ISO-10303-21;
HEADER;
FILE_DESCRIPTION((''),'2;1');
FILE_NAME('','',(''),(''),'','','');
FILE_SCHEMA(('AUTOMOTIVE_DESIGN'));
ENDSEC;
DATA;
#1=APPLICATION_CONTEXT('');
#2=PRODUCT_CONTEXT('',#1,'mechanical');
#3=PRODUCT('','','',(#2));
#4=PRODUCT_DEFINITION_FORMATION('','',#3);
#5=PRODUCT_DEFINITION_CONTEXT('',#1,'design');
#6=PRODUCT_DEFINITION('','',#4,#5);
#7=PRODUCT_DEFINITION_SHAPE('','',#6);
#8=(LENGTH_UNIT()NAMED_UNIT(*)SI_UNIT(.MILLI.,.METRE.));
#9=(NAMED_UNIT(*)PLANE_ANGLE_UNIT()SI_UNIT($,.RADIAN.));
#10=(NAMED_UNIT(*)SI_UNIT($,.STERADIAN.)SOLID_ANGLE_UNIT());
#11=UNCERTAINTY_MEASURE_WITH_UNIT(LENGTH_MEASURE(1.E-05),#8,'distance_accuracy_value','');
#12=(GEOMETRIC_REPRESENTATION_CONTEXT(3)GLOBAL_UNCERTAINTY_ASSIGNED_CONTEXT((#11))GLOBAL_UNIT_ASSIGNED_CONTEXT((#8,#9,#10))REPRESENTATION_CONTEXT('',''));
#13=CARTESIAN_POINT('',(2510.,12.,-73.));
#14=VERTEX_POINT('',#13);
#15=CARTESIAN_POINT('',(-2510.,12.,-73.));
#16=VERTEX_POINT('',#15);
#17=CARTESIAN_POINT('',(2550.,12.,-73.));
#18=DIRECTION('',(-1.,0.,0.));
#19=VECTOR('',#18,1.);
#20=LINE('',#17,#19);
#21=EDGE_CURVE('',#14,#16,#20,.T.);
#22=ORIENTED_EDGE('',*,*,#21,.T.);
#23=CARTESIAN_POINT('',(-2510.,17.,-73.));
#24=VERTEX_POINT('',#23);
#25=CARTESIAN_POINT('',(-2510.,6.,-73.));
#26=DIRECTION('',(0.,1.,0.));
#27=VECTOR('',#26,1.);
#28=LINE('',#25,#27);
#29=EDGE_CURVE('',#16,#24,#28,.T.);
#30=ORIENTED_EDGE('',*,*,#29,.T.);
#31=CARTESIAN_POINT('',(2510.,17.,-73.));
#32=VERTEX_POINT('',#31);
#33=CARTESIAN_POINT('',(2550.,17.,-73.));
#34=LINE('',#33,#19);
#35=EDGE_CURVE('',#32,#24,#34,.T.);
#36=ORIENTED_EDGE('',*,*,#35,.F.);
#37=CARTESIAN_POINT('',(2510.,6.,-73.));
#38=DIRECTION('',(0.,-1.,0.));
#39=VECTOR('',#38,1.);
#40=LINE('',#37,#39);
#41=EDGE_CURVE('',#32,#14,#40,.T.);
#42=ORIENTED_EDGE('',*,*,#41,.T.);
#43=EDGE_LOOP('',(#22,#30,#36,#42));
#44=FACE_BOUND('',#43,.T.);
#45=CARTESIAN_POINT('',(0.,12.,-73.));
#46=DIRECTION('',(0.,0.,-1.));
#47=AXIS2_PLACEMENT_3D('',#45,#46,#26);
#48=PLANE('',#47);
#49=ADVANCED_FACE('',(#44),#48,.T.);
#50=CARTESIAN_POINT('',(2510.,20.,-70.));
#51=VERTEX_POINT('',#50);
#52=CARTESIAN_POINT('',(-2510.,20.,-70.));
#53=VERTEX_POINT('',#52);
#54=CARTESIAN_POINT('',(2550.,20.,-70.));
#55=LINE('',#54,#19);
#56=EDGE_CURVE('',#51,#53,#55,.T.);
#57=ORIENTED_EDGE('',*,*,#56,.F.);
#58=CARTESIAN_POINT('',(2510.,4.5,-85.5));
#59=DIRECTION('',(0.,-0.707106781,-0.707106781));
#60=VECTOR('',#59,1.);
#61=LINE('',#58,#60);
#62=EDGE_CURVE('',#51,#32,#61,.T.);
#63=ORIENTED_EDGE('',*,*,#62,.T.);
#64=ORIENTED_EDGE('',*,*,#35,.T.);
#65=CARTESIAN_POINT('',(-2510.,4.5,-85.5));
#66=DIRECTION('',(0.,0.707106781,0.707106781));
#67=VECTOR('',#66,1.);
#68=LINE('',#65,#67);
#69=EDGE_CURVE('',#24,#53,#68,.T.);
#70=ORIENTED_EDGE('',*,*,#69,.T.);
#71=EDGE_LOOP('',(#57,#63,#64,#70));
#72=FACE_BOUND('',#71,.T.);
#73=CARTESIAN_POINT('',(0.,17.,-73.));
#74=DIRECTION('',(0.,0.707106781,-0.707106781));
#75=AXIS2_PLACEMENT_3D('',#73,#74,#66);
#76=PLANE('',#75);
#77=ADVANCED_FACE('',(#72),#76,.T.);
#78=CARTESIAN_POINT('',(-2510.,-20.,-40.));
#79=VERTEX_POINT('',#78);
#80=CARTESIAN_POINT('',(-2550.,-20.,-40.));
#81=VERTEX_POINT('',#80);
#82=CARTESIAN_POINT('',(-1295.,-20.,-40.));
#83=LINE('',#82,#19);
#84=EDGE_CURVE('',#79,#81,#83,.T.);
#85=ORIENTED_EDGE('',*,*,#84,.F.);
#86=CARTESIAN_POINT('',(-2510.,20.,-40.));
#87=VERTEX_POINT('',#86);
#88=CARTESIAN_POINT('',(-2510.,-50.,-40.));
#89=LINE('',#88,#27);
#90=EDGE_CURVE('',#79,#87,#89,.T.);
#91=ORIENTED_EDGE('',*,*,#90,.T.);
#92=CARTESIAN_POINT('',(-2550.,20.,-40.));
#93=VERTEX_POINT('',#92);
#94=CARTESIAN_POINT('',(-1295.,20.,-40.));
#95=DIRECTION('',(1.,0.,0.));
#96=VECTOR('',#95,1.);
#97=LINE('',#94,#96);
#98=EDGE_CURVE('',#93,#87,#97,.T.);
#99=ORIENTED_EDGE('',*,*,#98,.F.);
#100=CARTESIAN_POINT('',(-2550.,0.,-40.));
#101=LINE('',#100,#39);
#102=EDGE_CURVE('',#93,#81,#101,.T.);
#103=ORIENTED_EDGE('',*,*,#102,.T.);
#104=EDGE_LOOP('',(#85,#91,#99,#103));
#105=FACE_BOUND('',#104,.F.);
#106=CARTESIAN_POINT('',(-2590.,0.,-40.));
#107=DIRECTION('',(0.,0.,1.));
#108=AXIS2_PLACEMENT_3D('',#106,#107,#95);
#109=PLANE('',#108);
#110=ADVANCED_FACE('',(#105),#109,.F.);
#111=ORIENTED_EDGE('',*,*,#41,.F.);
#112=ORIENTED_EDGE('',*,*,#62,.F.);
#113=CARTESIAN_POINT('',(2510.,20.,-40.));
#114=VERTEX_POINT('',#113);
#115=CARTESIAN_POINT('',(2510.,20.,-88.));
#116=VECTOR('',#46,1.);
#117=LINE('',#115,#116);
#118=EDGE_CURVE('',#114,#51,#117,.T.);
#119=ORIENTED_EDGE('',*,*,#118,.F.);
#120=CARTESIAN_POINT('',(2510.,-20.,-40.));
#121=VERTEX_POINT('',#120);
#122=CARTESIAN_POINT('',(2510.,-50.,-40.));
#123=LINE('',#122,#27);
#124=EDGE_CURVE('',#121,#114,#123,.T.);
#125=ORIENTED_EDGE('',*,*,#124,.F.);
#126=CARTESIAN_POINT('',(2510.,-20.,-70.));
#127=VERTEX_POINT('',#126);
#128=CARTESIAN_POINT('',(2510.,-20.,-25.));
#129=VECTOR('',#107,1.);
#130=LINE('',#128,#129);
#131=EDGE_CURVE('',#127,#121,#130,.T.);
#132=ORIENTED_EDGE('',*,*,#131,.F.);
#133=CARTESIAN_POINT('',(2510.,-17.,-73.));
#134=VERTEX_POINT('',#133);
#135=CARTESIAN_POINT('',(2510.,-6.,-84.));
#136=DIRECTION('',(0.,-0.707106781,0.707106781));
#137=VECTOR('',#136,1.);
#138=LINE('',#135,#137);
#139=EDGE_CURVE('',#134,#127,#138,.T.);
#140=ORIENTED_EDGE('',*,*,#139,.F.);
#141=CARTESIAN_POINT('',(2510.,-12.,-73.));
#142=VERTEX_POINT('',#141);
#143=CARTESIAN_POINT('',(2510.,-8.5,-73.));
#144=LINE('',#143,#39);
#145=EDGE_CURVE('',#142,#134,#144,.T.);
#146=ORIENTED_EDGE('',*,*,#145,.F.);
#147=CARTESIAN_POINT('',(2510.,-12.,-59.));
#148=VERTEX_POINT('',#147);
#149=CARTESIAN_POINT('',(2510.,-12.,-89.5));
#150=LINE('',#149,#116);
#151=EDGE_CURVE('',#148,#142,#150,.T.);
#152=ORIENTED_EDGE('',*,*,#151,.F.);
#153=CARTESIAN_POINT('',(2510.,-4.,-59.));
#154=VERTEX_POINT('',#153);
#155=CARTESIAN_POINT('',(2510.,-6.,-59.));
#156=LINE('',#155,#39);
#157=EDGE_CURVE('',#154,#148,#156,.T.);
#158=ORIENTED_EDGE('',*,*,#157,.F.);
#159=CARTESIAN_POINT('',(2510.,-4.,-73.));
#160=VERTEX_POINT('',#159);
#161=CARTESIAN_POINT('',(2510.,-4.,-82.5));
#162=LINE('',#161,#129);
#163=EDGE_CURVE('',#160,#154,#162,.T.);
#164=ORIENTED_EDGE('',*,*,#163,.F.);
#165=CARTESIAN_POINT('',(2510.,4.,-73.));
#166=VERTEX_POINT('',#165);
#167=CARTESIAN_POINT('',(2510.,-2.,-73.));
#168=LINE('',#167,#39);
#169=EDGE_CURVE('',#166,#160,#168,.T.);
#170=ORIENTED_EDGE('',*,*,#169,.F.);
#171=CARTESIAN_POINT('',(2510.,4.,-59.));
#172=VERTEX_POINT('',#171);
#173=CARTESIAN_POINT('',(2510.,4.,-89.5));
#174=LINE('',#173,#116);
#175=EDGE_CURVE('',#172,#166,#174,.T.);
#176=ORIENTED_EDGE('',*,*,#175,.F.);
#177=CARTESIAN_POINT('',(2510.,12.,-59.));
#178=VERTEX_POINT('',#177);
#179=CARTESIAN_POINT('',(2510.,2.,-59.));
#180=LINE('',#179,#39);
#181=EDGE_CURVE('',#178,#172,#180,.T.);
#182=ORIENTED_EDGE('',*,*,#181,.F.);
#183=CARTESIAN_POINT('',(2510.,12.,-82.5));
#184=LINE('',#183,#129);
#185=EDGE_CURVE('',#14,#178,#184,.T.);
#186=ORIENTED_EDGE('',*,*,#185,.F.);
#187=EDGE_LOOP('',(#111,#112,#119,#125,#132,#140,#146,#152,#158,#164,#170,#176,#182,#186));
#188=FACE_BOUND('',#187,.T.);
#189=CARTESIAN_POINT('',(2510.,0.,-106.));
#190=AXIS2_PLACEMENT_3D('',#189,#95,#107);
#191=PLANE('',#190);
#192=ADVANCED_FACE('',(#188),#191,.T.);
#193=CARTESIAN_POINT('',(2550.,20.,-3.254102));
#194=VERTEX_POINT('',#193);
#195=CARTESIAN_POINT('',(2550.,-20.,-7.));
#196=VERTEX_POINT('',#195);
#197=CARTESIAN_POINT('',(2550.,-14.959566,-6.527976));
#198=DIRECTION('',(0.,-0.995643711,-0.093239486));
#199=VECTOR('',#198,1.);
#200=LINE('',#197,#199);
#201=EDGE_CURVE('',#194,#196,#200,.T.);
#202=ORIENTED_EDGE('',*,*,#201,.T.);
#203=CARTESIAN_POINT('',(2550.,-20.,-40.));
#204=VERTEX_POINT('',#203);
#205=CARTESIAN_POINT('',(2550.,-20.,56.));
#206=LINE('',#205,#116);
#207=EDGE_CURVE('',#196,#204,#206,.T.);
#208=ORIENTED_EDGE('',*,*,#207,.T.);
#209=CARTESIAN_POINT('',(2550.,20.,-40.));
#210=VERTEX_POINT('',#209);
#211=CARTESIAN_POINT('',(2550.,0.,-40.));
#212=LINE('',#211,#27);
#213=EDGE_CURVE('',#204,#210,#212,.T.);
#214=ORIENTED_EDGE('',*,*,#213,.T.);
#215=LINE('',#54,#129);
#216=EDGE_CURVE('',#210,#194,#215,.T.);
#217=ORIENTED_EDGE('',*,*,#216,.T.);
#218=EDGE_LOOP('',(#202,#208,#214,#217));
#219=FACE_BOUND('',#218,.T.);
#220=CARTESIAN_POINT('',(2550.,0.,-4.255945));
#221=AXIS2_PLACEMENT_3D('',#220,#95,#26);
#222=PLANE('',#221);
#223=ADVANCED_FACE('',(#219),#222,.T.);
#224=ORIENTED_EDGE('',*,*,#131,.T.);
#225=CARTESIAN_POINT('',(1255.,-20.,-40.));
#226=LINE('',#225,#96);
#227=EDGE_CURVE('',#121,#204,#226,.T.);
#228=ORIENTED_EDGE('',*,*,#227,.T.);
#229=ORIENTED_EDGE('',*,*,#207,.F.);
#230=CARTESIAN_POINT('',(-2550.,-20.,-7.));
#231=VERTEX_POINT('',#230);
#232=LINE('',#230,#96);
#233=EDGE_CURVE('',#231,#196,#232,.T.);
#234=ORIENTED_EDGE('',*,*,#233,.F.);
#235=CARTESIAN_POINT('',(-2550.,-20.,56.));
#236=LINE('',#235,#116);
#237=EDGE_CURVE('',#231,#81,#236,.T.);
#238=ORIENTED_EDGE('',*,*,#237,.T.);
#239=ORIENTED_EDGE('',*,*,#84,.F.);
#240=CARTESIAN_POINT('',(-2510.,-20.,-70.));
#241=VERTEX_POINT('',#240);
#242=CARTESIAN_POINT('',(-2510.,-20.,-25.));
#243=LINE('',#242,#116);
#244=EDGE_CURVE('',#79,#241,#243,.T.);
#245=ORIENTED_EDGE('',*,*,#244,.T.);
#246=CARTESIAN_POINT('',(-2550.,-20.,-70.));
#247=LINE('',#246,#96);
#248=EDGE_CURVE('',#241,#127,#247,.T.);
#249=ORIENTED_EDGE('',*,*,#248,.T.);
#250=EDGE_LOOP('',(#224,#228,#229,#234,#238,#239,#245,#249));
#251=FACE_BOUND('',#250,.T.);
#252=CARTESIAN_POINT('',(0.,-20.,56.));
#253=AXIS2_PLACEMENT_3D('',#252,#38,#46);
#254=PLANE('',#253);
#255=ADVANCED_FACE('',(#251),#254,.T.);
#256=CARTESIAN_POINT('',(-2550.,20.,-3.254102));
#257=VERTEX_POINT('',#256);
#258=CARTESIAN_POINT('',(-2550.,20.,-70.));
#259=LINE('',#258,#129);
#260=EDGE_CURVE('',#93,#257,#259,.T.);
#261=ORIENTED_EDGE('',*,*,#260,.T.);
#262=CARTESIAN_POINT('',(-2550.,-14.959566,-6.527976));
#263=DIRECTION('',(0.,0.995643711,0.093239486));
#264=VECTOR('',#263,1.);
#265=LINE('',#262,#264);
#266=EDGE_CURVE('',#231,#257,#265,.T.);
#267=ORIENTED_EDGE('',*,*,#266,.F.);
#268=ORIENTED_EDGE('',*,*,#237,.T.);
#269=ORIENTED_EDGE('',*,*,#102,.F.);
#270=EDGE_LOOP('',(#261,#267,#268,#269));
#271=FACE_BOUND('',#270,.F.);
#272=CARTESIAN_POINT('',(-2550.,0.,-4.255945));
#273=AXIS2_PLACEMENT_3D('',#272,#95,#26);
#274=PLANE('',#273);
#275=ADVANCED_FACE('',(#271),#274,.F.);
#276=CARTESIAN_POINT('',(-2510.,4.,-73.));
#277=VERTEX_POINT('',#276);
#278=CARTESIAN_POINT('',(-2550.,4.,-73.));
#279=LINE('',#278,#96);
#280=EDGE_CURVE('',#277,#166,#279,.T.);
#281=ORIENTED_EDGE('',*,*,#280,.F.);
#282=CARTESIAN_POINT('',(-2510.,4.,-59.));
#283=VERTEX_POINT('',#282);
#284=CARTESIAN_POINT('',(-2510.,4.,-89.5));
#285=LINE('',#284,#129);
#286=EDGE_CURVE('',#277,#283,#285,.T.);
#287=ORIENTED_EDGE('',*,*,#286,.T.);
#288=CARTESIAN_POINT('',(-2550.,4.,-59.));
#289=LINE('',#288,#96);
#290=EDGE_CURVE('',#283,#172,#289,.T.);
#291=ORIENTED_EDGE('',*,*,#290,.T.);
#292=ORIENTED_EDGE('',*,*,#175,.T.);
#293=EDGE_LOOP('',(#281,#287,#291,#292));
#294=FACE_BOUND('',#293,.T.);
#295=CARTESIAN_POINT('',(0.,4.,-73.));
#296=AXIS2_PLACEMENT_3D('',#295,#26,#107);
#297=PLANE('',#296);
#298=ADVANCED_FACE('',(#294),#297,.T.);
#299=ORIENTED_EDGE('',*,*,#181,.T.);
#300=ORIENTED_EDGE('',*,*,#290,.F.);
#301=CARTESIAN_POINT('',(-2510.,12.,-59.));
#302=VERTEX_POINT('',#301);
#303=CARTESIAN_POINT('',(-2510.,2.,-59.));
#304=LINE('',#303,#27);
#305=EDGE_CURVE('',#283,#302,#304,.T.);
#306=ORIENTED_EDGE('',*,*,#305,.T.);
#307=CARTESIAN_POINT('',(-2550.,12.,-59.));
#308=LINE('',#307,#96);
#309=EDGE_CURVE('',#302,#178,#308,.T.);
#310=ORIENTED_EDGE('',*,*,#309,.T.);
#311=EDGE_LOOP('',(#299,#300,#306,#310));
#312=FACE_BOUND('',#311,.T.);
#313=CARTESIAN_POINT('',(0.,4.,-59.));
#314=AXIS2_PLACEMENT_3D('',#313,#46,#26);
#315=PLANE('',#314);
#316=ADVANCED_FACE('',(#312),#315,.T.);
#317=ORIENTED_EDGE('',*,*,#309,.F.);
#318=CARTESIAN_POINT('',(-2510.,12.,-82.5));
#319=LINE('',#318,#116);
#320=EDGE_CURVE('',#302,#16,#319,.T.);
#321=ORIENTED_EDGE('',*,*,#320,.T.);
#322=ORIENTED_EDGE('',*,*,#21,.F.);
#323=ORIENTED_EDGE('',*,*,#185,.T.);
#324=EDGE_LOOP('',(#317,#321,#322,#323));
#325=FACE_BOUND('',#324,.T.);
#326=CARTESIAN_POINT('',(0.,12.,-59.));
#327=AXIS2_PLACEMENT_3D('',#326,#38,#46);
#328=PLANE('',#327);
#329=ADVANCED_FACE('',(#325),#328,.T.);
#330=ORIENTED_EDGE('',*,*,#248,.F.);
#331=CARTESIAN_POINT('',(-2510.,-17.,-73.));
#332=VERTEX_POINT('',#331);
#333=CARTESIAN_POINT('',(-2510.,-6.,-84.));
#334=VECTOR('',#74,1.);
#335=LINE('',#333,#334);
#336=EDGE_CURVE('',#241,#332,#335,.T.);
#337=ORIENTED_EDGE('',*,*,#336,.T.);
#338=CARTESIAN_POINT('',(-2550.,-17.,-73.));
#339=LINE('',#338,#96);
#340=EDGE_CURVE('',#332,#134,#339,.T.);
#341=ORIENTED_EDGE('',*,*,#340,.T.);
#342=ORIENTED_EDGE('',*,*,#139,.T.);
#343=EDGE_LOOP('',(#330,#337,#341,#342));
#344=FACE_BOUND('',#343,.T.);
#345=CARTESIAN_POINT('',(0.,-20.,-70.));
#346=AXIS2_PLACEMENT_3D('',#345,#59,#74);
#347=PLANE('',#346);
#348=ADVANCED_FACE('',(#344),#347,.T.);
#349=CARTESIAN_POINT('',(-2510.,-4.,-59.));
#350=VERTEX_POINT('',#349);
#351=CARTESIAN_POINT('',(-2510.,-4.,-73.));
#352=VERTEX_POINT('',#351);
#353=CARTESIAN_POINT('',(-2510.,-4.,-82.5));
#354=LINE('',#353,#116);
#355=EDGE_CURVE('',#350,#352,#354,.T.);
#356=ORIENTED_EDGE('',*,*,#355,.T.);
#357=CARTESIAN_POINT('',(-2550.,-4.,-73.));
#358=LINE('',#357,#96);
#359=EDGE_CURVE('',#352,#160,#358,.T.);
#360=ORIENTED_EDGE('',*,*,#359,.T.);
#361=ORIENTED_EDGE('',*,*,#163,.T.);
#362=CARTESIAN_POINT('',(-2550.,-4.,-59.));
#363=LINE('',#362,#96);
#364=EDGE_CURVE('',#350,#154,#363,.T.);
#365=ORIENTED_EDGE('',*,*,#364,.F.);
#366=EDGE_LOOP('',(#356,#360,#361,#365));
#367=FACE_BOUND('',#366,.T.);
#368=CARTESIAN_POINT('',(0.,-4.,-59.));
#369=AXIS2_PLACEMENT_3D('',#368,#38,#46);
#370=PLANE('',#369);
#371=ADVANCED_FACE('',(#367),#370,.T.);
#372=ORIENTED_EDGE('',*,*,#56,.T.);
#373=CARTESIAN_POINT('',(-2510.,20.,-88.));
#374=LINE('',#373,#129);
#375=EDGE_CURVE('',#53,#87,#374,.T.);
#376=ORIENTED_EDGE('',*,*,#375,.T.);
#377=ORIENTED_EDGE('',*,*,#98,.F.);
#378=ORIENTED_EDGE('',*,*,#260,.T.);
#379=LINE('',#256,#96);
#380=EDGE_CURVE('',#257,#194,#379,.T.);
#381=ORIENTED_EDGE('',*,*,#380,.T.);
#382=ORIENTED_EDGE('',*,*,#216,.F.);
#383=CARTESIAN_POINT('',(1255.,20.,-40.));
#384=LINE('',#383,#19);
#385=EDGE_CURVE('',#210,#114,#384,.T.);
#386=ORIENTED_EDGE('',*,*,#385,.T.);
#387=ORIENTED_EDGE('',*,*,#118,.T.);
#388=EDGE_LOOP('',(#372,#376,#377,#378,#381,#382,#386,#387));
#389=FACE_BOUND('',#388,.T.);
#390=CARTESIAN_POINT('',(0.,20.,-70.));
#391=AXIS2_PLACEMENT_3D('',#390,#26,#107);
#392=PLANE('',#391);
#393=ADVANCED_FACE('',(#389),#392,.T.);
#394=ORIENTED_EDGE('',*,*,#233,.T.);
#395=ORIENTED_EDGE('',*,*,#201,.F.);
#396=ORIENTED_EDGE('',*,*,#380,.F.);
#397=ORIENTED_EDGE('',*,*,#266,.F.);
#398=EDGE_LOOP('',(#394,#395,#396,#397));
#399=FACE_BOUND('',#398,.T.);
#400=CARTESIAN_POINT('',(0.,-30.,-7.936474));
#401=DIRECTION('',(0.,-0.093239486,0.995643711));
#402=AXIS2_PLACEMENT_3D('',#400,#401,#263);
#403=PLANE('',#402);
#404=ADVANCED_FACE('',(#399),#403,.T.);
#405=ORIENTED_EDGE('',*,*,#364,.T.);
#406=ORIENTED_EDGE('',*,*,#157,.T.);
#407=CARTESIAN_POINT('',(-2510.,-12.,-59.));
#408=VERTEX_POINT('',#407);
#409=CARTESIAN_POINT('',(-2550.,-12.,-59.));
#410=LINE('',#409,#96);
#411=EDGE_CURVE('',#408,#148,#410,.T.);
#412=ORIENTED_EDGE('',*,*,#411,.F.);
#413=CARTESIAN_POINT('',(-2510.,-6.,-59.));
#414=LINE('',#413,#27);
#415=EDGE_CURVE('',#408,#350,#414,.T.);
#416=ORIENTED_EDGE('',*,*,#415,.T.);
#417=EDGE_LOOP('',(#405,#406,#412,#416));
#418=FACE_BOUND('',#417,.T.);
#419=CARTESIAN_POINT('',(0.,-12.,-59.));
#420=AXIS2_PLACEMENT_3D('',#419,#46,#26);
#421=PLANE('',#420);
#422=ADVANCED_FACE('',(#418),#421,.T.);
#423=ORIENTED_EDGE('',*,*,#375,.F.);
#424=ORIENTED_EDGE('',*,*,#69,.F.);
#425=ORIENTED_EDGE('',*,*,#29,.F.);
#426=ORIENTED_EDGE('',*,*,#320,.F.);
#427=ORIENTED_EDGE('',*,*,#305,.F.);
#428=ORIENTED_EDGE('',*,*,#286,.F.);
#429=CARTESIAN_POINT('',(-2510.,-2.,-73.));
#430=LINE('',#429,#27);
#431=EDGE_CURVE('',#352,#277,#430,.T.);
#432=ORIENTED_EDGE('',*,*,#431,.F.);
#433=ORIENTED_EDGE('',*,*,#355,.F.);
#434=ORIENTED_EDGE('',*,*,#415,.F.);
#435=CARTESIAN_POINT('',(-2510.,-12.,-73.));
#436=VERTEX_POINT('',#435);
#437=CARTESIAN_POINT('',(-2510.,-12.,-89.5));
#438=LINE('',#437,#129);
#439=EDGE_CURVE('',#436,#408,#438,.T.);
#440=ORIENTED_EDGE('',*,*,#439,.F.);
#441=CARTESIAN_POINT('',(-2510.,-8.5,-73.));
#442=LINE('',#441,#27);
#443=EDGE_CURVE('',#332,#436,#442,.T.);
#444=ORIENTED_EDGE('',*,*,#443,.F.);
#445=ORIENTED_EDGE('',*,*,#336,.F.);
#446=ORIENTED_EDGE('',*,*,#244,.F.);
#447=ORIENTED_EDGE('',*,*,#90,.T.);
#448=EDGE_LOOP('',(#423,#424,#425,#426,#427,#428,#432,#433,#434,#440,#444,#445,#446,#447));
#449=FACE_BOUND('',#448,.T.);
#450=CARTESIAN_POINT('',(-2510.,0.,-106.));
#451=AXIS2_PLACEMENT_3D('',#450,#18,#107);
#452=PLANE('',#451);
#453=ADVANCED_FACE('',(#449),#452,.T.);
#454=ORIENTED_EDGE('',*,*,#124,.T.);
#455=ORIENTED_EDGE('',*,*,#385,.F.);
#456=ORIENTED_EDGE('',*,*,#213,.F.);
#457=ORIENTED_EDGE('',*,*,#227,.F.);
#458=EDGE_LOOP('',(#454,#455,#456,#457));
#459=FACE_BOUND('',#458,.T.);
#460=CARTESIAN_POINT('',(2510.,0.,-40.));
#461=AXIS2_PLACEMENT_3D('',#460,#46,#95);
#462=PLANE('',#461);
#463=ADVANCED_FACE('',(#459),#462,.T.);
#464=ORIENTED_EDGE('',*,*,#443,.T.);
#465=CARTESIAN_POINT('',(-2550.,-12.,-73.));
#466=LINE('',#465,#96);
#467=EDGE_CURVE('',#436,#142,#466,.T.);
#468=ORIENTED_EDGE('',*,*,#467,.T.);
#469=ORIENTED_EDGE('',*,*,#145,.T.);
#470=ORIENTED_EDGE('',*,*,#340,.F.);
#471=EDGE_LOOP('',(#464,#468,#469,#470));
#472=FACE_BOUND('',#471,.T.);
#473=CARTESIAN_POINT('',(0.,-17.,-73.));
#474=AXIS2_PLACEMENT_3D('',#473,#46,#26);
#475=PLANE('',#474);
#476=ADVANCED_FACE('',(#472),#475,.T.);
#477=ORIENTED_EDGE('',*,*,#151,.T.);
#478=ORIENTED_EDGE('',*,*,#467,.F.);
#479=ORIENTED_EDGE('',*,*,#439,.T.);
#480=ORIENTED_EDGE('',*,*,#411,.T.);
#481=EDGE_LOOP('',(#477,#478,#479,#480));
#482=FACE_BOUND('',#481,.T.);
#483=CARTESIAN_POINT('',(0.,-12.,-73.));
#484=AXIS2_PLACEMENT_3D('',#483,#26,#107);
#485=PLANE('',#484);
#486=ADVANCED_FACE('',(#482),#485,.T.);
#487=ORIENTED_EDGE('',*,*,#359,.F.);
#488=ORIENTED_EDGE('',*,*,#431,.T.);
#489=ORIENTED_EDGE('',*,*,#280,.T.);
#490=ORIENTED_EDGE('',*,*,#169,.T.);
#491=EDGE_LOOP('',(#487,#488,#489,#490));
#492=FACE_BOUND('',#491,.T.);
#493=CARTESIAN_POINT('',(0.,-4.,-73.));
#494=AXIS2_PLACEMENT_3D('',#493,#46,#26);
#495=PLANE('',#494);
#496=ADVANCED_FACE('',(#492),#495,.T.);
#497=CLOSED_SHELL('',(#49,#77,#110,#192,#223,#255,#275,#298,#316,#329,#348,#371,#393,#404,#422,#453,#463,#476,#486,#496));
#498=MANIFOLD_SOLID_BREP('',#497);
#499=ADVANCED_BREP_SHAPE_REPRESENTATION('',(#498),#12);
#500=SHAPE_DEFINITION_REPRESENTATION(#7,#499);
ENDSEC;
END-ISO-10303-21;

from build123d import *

# Parameters (mm, degrees)
F1_DEPTH      = 2550
F2_W          = 80
F2_H          = 66
F3_DEPTH      = 50
F6_DEPTH      = 2550.001
F6_DEPTH_BACK = 2550.001


with BuildPart() as f1:
    # F0 (on Right) → F1 (new body, symmetric)
    with BuildSketch(Plane.YZ):
        Polygon((20, -70), (20, 56), (17, 59), (12, 59), (12, 73), (4, 73), (4, 59), (-4, 59), (-4, 73), (-12, 73), (-12, 59), (-17, 59), (-20, 56), (-20, -70), (-17, -73), (-12, -73), (-12, -59), (-4, -59), (-4, -73), (4, -73), (4, -59), (12, -59), (12, -73), (17, -73), align=None)
    extrude(amount=F1_DEPTH, both=True)

    # F2 (on Front) → F3 (cut, symmetric)
    with BuildSketch(Plane.XZ):
        with Locations((-2550, 59)):
            Rectangle(F2_W, F2_H)
        with Locations((-2550, -73)):
            Rectangle(F2_W, F2_H)
        with Locations((2550, 59)):
            Rectangle(F2_W, F2_H)
        with Locations((2550, -73)):
            Rectangle(F2_W, F2_H)
    extrude(amount=F3_DEPTH, both=True, mode=Mode.SUBTRACT)

    # F5 (on Right) → F6 (cut, two sides)
    with BuildSketch(Plane.YZ) as f6_sk:
        Polygon((30, -2.3176279375), (30, 83), (-30, 83), (-30, -7.9364744125), align=None)
    extrude(amount=-F6_DEPTH, mode=Mode.SUBTRACT)
    extrude(f6_sk.sketch, amount=F6_DEPTH_BACK, mode=Mode.SUBTRACT)


solid = f1.part
